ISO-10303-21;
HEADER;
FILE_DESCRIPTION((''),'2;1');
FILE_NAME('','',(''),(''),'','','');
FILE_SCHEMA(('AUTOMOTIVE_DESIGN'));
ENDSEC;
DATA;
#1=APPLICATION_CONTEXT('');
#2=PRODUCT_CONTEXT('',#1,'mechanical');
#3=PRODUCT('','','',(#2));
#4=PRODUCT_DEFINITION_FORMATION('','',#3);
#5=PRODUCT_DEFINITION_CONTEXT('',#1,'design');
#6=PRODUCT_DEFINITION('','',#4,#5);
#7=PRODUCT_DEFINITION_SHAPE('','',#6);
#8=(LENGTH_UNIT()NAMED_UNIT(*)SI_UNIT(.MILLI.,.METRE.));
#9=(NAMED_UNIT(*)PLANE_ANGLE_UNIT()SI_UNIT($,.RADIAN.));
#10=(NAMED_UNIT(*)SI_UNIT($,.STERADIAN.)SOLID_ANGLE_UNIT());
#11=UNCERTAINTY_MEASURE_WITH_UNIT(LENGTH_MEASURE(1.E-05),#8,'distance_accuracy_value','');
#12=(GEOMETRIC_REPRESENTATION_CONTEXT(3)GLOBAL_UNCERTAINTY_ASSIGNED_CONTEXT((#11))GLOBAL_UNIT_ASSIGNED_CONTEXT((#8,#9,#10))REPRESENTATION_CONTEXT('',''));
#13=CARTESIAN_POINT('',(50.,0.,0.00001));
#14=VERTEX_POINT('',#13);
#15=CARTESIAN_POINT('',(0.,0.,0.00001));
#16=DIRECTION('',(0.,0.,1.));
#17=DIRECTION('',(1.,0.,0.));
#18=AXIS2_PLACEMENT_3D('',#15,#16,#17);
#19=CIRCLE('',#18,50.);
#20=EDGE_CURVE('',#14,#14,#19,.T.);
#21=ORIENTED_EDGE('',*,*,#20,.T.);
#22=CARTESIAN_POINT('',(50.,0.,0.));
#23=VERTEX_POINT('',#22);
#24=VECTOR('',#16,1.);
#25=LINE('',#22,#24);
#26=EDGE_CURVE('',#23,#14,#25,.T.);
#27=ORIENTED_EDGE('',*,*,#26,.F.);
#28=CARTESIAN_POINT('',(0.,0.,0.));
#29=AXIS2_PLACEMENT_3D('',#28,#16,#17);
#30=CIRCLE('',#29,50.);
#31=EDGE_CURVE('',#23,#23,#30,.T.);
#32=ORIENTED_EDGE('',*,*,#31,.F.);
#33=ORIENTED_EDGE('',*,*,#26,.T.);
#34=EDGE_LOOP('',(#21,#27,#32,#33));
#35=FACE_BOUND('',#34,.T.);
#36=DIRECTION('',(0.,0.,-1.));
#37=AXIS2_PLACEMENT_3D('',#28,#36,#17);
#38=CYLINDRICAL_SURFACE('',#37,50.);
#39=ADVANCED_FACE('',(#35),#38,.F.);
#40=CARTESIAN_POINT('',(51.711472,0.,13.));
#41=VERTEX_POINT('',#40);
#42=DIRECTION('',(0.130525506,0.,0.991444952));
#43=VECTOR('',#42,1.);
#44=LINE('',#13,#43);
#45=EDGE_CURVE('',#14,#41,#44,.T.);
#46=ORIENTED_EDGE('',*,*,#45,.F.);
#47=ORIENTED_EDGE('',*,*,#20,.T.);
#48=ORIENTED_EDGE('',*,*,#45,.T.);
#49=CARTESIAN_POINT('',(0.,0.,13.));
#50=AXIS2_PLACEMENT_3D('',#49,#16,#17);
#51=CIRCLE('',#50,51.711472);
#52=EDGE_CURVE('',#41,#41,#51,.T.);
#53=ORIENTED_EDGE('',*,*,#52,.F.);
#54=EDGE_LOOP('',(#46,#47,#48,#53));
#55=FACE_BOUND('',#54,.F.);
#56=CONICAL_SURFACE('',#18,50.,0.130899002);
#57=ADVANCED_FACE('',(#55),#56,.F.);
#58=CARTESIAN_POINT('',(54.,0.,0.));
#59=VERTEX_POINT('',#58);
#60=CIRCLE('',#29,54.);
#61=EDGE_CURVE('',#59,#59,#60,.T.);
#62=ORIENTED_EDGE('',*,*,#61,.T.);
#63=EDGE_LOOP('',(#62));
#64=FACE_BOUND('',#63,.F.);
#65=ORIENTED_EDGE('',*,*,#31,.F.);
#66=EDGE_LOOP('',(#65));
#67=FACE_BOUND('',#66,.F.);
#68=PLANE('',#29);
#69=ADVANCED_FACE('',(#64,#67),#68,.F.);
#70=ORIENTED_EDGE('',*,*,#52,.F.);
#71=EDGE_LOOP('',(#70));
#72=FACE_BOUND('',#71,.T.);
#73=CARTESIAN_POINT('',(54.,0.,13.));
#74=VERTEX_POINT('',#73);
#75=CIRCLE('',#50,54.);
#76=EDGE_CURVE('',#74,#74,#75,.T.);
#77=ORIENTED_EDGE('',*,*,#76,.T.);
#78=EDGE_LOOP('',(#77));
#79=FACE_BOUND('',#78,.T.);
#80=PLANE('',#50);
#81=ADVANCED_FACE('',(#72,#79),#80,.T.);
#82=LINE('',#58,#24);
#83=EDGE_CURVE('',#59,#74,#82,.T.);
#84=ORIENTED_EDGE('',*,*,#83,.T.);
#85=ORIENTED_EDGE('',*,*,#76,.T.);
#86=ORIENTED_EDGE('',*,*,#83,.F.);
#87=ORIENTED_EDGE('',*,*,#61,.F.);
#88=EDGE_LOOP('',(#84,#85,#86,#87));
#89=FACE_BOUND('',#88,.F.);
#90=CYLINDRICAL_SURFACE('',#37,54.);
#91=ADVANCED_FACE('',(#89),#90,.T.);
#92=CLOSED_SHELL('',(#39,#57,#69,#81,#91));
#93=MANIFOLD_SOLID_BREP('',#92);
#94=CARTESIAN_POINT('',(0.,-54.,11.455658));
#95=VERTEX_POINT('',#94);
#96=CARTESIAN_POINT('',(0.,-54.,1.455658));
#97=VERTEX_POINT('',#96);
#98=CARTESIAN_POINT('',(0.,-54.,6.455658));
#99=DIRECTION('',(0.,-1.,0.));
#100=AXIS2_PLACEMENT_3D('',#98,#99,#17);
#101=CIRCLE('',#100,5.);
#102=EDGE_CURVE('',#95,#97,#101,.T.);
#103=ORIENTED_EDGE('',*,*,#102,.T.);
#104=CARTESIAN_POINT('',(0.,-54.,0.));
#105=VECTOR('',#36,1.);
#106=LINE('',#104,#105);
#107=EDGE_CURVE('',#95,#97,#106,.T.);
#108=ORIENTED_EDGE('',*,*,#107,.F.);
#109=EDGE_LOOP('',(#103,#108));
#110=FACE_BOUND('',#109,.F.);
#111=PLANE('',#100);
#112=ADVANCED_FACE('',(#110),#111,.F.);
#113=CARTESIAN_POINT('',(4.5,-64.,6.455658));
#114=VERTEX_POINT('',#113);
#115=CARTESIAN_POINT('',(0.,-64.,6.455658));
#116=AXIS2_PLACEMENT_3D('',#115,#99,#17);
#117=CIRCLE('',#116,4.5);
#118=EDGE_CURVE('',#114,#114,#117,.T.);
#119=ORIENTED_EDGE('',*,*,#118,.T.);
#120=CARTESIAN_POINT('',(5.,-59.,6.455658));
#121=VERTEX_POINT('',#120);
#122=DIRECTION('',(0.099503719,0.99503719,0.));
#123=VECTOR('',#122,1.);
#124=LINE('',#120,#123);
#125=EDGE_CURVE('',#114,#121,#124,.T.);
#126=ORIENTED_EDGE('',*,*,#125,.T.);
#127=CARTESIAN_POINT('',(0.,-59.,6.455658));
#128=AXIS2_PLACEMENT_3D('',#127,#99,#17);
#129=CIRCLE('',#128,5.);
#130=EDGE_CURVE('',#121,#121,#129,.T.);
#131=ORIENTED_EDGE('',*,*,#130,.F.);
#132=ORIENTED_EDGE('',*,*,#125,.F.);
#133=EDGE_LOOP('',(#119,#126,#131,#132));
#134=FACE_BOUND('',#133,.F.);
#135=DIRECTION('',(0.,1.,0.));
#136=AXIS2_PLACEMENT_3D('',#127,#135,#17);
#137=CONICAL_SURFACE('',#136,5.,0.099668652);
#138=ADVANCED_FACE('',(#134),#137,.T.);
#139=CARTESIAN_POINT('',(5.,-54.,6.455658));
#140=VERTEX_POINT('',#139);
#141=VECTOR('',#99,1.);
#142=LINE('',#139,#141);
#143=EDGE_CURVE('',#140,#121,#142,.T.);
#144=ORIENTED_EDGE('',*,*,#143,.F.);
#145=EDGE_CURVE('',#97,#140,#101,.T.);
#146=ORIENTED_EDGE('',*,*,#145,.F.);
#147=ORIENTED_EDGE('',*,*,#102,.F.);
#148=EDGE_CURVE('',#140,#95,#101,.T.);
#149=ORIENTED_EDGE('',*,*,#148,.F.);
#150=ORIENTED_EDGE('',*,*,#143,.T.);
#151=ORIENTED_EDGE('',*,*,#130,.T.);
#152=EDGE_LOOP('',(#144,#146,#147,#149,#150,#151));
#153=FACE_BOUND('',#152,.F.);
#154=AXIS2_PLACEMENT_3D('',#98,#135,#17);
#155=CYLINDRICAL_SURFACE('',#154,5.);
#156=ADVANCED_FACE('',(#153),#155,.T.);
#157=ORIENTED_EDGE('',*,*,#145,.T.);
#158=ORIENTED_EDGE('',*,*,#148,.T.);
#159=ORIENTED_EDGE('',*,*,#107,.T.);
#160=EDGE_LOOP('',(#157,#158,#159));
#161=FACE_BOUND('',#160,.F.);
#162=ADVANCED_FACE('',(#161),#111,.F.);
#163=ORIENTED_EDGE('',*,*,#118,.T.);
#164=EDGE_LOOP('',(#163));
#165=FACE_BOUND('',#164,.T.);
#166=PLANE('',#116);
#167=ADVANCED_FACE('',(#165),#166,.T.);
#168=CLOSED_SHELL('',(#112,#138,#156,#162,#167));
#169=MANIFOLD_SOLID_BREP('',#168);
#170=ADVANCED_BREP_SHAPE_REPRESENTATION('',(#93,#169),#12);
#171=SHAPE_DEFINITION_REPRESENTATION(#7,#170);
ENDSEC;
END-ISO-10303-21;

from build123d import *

# Parameters (mm, degrees)
F0_R     = 54
F0_R_2   = 50
F1_DEPTH = 13
F3_R     = 5
F4_DEPTH = 10
F5_SIZE2 = 1.711472
F5_SIZE  = 12.99999
F6_SIZE2 = 5
F6_SIZE  = 0.5


# Not quite as in the source:
# - a fillet or chamfer is up to 0.001 mm smaller than in the source, because OpenCascade refuses the exact size


with BuildPart() as f1:
    # F0 (on Top) → F1 (new body)
    with BuildSketch(Plane.XY):
        Circle(F0_R)
        Circle(F0_R_2, mode=Mode.SUBTRACT)
    extrude(amount=F1_DEPTH)

    # F3 (on offset) → F4 (join)
    with BuildSketch(Plane.XZ.offset(54)):
        with Locations((0, 6.4556576599)):
            Circle(F3_R)
    extrude(amount=F4_DEPTH)

    # F5 (size 13 and 1.7114824686 in the source; OpenCascade refuses exactly that, so slightly less here)
    f5_edges = [f1.edges().sort_by_distance(p)[0] for p in [
        (-50, 0, 13),
    ]]
    f5_side = f1.faces().sort_by_distance((-50, 0, 6.5))[0]
    chamfer(f5_edges, length=F5_SIZE, length2=F5_SIZE2, reference=f5_side)

    # F6
    f6_edges = [f1.edges().sort_by_distance(p)[0] for p in [
        (-5, -64, 6.455658),
    ]]
    f6_side = f1.faces().sort_by_distance((0, -64, 6.455658))[0]
    chamfer(f6_edges, length=F6_SIZE, length2=F6_SIZE2, reference=f6_side)


solid = f1.part
